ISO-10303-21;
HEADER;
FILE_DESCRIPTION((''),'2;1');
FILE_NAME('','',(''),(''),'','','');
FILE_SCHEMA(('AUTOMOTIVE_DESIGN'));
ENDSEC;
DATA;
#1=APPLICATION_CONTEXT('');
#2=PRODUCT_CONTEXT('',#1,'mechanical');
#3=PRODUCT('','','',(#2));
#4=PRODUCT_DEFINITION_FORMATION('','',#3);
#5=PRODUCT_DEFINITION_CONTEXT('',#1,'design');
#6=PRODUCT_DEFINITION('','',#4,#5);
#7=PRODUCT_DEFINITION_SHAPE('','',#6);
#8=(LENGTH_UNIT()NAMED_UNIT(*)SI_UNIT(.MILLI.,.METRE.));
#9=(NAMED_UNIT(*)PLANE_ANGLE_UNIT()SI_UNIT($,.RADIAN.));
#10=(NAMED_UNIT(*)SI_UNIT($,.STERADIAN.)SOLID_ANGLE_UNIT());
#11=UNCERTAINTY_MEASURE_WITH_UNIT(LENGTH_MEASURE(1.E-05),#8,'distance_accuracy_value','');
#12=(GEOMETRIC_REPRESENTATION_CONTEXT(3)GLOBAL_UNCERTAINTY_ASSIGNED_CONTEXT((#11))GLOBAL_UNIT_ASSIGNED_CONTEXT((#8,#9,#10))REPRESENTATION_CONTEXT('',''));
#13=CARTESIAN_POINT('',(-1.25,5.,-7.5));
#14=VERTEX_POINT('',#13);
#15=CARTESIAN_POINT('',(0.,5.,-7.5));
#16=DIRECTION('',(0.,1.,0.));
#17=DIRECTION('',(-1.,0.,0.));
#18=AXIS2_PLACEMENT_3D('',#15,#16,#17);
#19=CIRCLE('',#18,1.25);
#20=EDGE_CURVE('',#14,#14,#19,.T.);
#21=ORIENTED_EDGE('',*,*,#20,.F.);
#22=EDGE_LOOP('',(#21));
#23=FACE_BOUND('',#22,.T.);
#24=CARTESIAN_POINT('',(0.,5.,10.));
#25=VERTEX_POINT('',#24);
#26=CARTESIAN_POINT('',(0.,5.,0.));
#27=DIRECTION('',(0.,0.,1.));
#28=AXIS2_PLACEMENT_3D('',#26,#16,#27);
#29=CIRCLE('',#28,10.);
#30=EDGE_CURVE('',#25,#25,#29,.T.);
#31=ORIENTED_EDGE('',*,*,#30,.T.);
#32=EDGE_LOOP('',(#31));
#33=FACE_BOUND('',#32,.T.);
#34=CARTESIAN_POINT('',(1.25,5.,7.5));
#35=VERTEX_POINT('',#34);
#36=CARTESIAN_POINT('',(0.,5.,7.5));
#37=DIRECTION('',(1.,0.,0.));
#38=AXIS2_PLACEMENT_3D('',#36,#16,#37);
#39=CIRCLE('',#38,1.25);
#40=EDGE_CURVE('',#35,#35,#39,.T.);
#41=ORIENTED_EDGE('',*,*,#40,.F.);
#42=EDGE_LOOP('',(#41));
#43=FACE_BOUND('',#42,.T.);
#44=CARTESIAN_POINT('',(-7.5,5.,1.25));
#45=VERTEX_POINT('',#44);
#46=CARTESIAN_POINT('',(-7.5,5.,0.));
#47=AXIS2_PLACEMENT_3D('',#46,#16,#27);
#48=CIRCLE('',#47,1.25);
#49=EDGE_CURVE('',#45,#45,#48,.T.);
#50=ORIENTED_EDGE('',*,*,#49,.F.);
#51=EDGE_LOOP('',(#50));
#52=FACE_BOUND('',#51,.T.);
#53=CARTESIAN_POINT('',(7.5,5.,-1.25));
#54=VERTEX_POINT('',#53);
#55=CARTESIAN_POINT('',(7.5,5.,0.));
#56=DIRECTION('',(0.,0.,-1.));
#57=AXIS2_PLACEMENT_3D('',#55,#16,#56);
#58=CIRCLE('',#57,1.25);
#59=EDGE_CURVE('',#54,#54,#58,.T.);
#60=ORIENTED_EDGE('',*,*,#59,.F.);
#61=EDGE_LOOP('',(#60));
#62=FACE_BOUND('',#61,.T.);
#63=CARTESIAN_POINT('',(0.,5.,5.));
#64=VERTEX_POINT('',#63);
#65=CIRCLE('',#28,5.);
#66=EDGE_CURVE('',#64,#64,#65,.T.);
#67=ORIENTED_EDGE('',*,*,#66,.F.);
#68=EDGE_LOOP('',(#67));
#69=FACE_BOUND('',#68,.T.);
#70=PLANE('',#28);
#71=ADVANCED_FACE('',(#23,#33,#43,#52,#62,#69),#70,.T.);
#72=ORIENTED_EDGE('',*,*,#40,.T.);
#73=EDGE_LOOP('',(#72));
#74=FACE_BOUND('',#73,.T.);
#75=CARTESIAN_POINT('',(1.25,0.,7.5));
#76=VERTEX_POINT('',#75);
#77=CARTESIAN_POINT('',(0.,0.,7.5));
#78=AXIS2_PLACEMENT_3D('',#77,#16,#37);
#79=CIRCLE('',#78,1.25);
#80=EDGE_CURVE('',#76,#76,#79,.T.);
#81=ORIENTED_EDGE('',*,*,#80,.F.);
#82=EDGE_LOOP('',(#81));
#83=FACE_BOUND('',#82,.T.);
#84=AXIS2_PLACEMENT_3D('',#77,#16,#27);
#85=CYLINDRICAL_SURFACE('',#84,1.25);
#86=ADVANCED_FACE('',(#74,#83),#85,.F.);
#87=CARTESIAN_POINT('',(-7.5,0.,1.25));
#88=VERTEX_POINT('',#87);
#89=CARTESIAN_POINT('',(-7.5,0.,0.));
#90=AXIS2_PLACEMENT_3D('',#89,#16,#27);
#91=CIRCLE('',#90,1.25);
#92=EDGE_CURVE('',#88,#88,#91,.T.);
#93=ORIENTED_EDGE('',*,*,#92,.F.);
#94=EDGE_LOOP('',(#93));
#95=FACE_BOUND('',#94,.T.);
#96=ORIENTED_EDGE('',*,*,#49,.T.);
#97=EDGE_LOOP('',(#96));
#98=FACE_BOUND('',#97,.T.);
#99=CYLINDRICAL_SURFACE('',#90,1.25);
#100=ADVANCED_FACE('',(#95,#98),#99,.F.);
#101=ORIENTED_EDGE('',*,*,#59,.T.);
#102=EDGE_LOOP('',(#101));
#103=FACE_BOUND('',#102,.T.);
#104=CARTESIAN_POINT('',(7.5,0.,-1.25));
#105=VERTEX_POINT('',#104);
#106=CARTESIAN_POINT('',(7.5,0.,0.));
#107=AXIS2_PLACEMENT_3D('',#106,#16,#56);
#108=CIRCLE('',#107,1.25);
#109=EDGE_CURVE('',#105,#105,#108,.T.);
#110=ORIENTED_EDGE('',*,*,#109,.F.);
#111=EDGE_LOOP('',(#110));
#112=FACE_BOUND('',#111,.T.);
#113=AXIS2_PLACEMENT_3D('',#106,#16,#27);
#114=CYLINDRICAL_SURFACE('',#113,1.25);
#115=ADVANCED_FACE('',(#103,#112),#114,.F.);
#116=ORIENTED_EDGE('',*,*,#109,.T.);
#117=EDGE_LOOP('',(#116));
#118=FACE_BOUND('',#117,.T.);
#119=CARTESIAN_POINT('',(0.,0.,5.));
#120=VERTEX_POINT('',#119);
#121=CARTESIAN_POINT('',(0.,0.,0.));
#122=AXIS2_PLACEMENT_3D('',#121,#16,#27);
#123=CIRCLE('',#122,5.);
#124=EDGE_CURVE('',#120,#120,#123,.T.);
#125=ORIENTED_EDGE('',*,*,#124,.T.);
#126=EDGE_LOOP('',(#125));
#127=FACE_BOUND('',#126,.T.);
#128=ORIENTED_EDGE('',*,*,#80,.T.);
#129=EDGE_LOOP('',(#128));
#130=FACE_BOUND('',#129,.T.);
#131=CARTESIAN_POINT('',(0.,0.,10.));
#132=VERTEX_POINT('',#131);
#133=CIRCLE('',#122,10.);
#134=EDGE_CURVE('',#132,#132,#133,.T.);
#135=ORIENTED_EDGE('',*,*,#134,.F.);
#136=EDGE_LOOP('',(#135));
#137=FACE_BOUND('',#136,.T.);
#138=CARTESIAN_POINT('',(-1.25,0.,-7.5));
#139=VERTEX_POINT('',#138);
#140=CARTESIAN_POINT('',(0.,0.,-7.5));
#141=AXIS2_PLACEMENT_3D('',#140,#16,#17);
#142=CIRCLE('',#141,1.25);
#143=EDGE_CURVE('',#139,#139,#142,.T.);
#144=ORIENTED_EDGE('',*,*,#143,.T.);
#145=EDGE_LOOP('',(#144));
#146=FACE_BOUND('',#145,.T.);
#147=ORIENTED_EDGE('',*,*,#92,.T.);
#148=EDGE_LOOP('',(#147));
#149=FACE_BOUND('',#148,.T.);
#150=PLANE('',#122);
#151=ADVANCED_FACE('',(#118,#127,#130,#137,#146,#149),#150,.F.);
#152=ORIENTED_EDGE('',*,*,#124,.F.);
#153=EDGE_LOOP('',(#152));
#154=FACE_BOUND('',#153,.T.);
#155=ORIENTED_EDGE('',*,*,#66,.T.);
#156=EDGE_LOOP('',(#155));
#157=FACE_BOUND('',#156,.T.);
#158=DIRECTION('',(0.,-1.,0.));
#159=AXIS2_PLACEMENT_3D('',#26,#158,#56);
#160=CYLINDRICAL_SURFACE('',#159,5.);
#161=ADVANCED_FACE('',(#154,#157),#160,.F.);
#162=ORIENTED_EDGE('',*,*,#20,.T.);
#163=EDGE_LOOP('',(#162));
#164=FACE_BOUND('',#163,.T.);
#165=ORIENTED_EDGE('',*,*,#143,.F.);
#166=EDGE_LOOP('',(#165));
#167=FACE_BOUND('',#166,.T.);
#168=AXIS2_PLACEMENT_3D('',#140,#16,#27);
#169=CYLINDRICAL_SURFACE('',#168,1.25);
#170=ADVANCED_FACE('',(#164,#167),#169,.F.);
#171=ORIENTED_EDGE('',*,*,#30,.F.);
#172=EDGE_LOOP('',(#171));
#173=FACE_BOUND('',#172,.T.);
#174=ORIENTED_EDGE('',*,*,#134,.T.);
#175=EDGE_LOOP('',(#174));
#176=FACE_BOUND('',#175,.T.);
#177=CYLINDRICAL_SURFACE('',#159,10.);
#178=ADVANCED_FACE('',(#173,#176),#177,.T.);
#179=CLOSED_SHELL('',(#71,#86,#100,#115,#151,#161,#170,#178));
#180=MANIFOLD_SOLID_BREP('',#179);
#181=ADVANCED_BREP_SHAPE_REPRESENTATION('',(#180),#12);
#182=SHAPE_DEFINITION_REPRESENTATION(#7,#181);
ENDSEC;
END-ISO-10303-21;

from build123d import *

# Parameters (mm, degrees)
SKETCH1_R             = 10
BOSS_EXTRUDE1_DEPTH   = 5
SKETCH2_R             = 5
CUT_EXTRUDE1_DEPTH    = 16
SKETCH3_R             = 1.25
CUT_EXTRUDE2_DEPTH    = 5
CIRPATTERN1_OUTLINE_R = 1.25
CIRPATTERN1_DEPTH     = 5


# Read off the part's stored shape, not the designer's step: CirPattern1
with BuildPart() as part:
    # Sketch1 → Boss-Extrude1 (new body)
    with BuildSketch(Plane(origin=(0, 0, 0), x_dir=(1, 0, 0), z_dir=(0, 1, 0))):
        with Locations(Location((0, 0, 0), (0, 0, 270))):
            Circle(SKETCH1_R)
    extrude(amount=BOSS_EXTRUDE1_DEPTH)

    # Sketch2 → Cut-Extrude1 (cut, through all)
    with BuildSketch(Plane(origin=(0, 0, 0), x_dir=(1, 0, 0), z_dir=(0, 1, 0))):
        with Locations(Location((0, 0, 0), (0, 0, 270))):
            Circle(SKETCH2_R)
    extrude(amount=CUT_EXTRUDE1_DEPTH, mode=Mode.SUBTRACT)

    # Sketch3 → Cut-Extrude2 (cut)
    with BuildSketch(Plane(origin=(0, 5, 0), x_dir=(1, 0, 0), z_dir=(0, 1, 0))):
        with Locations(Location((-7.5, 0, 0), (0, 0, 270))):
            Circle(SKETCH3_R)
    extrude(amount=-CUT_EXTRUDE2_DEPTH, mode=Mode.SUBTRACT)

    # CirPattern1 outline → CirPattern1 (cut)
    with BuildSketch(Plane(origin=(0, 0, 0), x_dir=(1, 0, 0), z_dir=(0, 1, 0))):
        with Locations((0, 7.5)):
            Circle(CIRPATTERN1_OUTLINE_R)
        with Locations((7.5, 0)):
            Circle(CIRPATTERN1_OUTLINE_R)
        with Locations((0, -7.5)):
            Circle(CIRPATTERN1_OUTLINE_R)
    extrude(amount=CIRPATTERN1_DEPTH, mode=Mode.SUBTRACT)


solid = part.part
